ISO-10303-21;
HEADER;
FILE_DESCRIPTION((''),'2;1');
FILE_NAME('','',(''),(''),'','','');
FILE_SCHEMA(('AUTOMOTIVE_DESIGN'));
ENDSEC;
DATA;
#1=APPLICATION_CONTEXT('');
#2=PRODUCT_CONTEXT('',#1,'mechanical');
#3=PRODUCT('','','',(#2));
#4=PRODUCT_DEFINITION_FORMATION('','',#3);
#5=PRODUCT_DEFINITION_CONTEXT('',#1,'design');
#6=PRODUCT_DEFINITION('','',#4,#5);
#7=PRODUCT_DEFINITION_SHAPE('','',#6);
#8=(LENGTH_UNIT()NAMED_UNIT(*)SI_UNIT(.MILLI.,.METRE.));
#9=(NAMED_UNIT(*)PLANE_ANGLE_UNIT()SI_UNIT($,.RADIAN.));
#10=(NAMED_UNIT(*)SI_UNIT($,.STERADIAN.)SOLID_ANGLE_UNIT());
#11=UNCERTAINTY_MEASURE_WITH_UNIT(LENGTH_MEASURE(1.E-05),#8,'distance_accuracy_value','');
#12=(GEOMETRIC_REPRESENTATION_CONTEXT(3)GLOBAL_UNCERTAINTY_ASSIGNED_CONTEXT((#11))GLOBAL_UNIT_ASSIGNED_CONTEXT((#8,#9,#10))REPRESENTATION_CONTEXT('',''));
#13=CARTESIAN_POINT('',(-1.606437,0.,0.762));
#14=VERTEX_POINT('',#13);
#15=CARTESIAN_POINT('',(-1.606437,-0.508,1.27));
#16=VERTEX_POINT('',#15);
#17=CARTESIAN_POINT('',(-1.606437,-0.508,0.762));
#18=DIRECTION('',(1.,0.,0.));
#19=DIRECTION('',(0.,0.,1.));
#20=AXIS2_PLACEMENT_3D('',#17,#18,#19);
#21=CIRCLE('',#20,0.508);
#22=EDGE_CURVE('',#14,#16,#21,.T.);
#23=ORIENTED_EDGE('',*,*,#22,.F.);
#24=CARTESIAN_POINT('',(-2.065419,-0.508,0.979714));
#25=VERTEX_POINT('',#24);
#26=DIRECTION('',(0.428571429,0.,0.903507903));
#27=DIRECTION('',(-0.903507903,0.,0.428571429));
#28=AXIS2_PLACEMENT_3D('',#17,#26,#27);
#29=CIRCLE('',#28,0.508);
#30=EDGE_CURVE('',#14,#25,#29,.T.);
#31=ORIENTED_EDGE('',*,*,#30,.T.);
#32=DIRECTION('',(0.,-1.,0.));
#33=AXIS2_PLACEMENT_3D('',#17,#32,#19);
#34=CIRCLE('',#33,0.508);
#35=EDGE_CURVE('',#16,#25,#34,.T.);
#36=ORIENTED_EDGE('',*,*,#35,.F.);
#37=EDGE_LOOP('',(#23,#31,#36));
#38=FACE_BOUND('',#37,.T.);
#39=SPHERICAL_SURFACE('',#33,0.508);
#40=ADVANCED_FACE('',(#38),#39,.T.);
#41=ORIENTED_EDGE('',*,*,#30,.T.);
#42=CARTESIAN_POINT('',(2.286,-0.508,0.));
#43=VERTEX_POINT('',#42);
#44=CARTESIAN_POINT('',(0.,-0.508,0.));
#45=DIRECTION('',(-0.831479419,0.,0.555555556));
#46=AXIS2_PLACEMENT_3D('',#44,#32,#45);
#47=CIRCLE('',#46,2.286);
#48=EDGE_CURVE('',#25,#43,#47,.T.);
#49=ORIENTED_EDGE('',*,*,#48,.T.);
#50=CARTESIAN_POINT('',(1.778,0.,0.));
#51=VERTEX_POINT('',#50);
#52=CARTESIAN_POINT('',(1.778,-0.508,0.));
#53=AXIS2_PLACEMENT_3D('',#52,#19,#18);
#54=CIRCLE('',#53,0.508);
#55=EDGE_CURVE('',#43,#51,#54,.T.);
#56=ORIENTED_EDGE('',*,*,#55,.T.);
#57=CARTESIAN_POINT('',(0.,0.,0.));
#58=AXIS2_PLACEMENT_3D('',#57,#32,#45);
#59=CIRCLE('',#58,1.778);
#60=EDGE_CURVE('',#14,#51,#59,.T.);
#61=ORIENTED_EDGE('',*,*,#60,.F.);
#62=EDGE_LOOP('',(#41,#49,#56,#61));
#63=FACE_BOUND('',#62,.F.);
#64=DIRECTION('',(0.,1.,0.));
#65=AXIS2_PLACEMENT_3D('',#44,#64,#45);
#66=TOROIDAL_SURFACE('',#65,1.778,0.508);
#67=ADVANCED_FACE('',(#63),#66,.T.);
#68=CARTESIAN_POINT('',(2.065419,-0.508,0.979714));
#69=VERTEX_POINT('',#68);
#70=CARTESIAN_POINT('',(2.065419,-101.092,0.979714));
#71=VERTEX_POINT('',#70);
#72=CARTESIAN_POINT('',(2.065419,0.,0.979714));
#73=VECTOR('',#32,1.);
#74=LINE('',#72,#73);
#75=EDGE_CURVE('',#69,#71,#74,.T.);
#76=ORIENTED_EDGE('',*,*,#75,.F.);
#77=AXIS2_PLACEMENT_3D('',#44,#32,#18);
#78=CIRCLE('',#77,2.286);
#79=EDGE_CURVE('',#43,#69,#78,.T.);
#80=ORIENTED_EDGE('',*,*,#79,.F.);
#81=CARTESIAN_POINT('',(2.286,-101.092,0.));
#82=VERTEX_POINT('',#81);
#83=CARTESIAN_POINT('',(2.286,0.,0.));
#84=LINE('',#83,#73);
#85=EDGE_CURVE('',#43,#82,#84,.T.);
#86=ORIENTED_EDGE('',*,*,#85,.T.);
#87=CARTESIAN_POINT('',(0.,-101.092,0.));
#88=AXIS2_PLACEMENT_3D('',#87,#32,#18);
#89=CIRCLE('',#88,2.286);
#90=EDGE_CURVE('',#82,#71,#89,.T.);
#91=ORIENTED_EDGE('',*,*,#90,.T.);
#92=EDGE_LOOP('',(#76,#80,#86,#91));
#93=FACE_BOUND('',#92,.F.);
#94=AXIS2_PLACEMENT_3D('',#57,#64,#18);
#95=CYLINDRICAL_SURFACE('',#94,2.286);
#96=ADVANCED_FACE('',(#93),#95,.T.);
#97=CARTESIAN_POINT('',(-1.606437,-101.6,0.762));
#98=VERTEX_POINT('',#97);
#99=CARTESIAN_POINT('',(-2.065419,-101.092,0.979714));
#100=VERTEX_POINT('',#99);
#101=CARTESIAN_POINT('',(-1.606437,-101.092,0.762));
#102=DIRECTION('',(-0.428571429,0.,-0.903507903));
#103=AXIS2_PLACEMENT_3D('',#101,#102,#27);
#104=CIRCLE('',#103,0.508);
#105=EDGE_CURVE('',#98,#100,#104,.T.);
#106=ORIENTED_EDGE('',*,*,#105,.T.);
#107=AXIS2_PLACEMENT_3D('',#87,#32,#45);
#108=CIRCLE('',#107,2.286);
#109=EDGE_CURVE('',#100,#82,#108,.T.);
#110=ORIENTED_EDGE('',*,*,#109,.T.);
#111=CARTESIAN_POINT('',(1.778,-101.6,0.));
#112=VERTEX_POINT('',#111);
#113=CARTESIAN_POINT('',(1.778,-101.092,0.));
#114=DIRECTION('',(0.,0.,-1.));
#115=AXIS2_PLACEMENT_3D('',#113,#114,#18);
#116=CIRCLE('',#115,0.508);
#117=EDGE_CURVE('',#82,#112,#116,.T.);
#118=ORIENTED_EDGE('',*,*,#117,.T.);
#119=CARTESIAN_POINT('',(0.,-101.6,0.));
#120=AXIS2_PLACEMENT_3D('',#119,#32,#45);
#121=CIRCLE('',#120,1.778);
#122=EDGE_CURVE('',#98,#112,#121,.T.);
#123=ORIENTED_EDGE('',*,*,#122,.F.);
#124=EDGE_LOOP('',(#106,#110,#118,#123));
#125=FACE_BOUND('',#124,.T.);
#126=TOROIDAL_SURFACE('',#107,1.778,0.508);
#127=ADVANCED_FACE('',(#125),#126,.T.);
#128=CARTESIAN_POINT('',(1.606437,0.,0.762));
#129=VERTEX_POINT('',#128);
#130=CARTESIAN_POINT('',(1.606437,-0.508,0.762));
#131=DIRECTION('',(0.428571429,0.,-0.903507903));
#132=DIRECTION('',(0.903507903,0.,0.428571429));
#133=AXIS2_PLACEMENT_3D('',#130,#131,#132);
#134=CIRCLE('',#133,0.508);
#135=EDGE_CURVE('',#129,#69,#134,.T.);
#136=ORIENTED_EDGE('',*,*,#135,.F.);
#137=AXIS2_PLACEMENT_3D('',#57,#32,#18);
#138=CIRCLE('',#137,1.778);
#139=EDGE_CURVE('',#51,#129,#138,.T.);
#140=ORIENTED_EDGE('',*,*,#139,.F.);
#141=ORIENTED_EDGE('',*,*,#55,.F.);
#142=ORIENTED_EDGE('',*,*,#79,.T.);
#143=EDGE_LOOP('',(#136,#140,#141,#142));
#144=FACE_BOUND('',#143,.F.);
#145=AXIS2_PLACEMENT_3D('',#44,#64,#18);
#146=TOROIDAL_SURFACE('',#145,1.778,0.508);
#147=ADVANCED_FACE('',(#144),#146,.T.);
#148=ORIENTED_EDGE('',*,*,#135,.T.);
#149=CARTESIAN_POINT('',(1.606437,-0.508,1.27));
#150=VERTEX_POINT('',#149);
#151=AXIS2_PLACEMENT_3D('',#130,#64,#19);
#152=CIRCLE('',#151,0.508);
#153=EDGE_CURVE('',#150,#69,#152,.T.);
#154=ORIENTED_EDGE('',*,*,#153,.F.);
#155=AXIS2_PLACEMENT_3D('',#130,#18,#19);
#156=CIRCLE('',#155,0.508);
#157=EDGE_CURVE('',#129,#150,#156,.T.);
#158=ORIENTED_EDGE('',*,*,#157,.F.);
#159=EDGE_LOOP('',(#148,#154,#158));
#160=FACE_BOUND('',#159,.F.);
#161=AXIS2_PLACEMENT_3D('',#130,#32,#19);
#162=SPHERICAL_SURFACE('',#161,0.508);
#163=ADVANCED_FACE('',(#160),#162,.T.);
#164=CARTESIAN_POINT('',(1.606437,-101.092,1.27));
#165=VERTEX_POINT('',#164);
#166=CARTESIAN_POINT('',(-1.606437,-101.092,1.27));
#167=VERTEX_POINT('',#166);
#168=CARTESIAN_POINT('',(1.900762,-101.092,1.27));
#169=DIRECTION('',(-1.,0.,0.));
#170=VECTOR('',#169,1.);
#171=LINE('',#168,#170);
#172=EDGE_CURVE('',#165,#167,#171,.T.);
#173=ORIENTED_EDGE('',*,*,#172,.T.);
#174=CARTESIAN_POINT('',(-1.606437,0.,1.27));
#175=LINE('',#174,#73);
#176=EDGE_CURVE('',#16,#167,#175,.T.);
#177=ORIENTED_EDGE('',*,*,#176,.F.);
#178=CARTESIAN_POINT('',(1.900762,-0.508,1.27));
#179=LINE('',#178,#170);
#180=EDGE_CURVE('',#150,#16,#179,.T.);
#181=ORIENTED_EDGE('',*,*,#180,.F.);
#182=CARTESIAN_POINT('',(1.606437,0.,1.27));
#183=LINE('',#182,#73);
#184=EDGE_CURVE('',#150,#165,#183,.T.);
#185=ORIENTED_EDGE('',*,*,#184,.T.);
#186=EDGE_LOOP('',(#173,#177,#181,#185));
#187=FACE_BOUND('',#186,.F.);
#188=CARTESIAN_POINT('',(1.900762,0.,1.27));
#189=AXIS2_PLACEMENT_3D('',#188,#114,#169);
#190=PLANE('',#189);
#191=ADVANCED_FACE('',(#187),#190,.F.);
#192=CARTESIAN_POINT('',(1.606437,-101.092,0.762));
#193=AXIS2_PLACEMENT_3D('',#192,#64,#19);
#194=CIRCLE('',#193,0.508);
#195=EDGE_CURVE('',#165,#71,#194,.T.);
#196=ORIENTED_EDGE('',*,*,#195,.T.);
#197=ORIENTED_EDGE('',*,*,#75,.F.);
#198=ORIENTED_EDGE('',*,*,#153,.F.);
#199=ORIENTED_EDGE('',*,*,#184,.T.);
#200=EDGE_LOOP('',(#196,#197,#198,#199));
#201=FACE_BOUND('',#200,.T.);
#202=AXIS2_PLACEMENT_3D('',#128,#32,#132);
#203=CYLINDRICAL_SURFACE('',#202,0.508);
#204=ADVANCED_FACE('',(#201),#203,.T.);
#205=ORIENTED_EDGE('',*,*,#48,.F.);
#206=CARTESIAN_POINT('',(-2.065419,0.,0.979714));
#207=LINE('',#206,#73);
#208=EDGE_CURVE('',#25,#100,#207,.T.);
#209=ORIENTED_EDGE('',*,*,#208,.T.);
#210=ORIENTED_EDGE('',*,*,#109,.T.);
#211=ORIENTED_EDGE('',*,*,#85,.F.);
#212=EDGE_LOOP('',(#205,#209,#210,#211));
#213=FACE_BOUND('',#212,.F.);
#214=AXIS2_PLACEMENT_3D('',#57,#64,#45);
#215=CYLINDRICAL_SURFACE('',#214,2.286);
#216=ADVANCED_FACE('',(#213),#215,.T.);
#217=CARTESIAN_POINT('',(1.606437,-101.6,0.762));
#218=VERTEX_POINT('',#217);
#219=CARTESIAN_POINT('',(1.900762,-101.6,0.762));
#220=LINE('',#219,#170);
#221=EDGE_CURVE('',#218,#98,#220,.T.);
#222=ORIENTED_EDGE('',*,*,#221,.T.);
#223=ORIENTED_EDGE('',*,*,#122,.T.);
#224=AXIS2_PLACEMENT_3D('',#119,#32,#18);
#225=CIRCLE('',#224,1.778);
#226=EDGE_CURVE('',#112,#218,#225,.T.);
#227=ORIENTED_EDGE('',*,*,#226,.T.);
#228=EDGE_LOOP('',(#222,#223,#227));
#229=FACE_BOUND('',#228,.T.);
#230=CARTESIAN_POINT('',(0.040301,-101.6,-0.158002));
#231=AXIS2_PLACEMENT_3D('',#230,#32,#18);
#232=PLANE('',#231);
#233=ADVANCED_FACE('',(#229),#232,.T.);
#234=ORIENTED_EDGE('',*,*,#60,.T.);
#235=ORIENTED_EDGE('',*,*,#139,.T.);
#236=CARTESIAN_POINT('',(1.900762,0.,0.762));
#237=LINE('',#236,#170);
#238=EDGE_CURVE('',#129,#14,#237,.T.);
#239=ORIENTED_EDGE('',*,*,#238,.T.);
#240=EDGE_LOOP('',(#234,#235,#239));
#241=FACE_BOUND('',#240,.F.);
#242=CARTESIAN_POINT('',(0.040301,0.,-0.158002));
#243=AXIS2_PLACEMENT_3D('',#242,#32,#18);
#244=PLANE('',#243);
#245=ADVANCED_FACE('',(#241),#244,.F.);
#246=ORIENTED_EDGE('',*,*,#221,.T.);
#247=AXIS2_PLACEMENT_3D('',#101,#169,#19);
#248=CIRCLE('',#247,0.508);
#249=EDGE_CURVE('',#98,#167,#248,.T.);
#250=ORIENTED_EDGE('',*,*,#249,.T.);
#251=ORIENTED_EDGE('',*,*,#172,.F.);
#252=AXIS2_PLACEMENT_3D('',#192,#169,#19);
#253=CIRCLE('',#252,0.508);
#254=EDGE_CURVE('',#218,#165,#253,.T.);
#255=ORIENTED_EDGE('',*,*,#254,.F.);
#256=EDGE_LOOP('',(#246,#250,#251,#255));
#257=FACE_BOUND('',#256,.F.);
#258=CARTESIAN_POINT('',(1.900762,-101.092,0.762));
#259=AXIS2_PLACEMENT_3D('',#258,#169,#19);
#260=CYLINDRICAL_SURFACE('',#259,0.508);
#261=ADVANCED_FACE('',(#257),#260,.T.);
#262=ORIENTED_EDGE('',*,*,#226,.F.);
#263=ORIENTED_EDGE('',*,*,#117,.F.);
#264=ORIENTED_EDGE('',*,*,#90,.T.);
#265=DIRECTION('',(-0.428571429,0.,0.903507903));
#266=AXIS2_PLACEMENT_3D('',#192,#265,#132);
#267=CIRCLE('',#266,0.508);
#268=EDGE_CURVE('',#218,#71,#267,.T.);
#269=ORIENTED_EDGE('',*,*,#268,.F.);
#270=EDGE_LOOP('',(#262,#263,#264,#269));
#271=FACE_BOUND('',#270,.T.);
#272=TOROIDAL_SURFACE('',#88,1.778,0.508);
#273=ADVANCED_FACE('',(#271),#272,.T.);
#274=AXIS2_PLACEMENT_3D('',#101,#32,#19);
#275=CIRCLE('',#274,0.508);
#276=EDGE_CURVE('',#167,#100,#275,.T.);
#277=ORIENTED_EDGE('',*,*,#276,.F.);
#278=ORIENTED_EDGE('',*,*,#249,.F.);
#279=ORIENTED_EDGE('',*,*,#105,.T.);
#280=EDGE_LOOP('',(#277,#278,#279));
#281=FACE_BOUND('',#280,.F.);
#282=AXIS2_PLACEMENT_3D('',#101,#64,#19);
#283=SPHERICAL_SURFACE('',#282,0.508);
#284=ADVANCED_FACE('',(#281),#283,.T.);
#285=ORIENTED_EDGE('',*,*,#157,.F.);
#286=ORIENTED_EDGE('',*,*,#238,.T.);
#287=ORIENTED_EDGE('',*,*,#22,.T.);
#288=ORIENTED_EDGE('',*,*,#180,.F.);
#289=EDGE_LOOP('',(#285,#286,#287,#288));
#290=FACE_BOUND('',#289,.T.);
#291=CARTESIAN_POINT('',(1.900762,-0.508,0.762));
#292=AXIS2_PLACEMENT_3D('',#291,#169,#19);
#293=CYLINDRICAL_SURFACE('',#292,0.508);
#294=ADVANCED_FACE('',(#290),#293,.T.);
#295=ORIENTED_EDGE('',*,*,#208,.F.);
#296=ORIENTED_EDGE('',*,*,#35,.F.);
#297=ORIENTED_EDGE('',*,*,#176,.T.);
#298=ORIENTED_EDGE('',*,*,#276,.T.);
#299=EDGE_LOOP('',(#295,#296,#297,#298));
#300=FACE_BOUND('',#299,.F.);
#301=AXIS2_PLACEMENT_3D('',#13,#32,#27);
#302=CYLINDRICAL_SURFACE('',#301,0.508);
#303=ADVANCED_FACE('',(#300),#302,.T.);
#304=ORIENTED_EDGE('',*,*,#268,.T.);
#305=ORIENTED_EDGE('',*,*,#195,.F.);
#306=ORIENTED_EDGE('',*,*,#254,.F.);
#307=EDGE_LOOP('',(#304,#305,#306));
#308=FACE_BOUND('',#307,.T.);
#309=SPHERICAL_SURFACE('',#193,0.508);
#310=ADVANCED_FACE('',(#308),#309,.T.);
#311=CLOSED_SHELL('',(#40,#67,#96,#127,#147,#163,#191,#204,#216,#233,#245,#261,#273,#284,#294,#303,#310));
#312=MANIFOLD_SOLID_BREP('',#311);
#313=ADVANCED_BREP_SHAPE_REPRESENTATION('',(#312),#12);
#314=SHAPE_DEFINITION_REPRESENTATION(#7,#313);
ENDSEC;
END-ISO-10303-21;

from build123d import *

# Parameters (mm, degrees)
F1_DEPTH = 101.6
F2_R     = 0.508


with BuildPart() as f1:
    # F0 (on Front) → F1 (new body)
    with BuildSketch(Plane.XZ):
        with BuildLine():
            ThreePointArc((-1.9007619525, 1.27), (-0.6635714644, -2.1875714644), (2.286, 0))
            ThreePointArc((2.286, 0), (2.1875714644, 0.6635714644), (1.9007619525, 1.27))
            Line((1.9007619525, 1.27), (-1.9007619525, 1.27))
        make_face()
    extrude(amount=F1_DEPTH)

    # F2
    f2_edges = [f1.edges().sort_by_distance(p)[0] for p in [
        (-1.900762, -50.8, 1.27),
        (0, -101.6, 1.27),
        (-0.663571, -101.6, -2.187571),
        (0, 0, 1.27),
        (-0.663571, 0, -2.187571),
        (1.900762, -50.8, 1.27),
    ]]
    fillet(f2_edges, radius=F2_R)


solid = f1.part
